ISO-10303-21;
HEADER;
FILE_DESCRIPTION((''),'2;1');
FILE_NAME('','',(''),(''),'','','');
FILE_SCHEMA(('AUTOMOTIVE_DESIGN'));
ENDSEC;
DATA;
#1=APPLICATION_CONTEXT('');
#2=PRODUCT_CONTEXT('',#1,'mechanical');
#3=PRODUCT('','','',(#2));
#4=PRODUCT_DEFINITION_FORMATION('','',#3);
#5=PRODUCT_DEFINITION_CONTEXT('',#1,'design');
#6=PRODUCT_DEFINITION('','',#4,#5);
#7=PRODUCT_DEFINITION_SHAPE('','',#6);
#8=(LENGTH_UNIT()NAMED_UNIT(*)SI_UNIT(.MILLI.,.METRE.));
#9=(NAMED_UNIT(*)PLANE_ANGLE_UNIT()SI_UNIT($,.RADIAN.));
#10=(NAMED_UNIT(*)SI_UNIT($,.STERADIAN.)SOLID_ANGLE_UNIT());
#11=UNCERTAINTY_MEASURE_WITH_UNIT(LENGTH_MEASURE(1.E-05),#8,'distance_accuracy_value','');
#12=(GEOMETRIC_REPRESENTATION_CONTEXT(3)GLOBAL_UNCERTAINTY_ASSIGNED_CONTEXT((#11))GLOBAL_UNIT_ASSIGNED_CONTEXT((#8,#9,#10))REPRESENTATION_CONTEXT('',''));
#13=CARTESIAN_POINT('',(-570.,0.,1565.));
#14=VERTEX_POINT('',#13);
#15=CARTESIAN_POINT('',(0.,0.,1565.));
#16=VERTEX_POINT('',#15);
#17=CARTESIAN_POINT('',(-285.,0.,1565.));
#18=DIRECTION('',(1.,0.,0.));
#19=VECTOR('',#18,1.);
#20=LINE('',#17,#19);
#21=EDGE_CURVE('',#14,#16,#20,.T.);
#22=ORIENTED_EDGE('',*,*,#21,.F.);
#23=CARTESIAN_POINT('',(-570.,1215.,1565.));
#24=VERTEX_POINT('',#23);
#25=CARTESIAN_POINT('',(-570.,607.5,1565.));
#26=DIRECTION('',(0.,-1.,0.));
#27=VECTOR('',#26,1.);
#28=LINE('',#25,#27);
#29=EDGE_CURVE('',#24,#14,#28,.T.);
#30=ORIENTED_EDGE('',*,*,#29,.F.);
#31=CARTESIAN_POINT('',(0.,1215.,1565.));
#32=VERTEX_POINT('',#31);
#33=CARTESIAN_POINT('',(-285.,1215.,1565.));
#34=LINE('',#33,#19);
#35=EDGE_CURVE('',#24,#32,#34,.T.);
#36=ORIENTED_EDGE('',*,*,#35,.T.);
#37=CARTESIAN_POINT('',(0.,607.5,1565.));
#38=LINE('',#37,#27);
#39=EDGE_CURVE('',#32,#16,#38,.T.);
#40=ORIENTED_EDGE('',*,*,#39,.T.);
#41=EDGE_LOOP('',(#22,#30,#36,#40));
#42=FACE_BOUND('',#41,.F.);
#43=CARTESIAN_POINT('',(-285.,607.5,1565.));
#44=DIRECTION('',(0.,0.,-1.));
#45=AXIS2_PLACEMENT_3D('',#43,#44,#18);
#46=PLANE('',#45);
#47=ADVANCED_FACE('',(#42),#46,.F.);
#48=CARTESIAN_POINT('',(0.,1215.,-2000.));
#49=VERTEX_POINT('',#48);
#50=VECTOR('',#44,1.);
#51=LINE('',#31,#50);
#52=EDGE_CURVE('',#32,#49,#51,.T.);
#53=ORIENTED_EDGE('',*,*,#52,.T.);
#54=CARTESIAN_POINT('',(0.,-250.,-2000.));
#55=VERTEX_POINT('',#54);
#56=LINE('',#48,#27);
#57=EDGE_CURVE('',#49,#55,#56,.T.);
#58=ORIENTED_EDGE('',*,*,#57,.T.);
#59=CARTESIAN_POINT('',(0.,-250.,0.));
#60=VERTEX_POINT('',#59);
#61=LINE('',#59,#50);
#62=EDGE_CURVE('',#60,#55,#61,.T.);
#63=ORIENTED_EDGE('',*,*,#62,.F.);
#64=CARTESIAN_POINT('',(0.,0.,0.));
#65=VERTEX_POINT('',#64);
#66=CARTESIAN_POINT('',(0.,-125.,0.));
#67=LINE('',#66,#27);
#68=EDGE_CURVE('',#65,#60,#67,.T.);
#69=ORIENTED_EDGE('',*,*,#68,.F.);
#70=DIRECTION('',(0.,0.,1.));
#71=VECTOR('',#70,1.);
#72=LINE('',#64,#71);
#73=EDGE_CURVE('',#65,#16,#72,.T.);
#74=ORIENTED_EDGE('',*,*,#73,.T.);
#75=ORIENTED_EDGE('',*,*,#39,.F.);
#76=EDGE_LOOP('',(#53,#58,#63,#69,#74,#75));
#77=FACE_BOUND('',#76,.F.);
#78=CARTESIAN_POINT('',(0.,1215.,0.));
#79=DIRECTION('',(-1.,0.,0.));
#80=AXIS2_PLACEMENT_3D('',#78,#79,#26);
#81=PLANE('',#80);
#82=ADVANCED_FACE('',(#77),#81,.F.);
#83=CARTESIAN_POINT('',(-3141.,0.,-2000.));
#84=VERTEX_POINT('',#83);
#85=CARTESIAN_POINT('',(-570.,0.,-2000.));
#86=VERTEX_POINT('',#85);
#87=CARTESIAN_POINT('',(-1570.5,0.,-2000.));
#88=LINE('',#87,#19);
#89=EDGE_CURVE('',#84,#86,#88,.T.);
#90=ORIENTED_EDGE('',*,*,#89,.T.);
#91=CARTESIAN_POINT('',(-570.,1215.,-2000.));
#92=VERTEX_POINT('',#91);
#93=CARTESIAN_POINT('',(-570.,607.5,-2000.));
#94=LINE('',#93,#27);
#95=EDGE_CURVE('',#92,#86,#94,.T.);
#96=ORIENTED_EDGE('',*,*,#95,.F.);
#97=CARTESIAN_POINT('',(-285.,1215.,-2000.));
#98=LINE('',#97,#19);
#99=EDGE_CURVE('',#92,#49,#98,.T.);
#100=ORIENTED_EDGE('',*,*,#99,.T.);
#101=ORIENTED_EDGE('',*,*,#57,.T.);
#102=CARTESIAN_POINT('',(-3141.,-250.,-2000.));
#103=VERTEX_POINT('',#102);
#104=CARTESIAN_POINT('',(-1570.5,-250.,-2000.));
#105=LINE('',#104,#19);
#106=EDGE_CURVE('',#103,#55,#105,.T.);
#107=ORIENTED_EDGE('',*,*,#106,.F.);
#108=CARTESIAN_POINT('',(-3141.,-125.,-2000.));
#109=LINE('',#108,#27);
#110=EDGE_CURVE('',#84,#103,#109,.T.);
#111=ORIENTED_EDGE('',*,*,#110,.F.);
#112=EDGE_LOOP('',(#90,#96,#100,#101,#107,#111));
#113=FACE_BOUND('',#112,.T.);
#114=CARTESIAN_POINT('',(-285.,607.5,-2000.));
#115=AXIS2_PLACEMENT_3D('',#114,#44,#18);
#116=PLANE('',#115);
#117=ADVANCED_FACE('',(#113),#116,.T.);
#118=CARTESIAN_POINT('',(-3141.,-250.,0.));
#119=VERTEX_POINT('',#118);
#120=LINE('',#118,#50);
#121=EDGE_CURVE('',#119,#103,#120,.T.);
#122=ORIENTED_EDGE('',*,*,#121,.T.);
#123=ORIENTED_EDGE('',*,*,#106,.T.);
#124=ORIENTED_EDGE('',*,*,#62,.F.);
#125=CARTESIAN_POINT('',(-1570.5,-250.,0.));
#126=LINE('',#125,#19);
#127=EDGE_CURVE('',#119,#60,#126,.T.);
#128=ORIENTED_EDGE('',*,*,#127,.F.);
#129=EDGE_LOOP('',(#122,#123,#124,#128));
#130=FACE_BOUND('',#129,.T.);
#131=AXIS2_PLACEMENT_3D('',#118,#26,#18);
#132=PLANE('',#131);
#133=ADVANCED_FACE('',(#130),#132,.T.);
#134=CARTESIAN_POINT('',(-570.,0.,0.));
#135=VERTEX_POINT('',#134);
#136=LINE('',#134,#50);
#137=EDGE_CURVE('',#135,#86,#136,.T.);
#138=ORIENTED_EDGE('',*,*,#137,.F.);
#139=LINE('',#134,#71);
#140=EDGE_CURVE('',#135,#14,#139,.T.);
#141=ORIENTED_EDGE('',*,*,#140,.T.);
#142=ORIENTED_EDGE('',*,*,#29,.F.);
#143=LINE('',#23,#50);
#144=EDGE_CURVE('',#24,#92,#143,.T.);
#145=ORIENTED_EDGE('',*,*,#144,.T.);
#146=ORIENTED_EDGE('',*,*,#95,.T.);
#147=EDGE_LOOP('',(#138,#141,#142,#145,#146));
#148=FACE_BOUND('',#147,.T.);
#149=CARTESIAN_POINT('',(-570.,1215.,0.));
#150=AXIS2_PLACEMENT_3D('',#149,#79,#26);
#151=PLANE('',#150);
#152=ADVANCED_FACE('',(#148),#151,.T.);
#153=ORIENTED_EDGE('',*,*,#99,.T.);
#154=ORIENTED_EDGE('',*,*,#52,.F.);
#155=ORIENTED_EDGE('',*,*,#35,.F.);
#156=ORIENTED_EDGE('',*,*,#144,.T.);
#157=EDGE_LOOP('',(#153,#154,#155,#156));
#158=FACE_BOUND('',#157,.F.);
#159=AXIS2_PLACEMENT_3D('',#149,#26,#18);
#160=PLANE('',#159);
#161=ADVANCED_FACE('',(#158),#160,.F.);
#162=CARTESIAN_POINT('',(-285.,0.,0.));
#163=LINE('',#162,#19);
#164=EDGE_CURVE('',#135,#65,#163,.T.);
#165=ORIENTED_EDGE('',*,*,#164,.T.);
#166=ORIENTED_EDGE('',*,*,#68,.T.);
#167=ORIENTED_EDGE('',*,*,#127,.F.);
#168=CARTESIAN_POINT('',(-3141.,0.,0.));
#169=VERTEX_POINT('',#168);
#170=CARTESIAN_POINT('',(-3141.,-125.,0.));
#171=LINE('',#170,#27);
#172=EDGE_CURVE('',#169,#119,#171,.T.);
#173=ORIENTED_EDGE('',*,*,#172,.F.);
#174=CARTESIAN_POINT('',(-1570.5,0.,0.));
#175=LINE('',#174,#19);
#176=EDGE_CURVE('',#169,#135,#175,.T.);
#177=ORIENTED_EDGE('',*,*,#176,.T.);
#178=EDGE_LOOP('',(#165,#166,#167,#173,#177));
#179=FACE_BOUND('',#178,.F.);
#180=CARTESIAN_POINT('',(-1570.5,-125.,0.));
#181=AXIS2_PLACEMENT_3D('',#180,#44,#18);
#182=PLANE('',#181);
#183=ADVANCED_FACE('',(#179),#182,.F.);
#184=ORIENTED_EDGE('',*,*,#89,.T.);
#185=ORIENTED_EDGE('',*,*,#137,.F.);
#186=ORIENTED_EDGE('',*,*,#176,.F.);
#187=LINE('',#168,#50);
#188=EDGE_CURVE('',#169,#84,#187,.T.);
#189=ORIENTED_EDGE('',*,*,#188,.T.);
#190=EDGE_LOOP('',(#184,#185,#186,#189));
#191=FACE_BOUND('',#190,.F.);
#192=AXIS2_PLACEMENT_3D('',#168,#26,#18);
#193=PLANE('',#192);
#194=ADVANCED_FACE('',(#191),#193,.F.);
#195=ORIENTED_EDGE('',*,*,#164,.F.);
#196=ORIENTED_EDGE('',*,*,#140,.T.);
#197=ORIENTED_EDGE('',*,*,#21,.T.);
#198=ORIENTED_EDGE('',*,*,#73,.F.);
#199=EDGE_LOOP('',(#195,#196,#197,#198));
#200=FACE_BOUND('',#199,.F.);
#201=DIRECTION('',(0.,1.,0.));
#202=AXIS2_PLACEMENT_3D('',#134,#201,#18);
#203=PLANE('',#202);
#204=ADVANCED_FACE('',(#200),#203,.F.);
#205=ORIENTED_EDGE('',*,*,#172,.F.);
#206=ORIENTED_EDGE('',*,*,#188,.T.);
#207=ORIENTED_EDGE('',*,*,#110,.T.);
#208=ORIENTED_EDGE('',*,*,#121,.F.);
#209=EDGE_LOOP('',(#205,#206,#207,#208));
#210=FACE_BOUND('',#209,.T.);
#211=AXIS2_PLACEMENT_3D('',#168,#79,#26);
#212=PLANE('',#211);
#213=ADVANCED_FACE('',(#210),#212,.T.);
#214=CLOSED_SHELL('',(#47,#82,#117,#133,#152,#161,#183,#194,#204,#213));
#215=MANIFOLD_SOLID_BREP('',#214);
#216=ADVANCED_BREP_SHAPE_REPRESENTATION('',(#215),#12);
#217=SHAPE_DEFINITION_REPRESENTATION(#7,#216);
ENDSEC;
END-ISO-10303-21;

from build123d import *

# Parameters (mm, degrees)
F4_W     = 570
F4_H     = 1215
F5_DEPTH = 1565
F1_E1_W  = 3141
F1_E1_H  = 250
F6_DEPTH = 2000
F7_DEPTH = 2000


# Not quite as in the source:
# - an extrude ends at something that could not be found from the text; its depth is read off the source's solid
# - the program builds the solid bodies; features that only make, move or delete a surface that nothing else refers to are left out


with BuildPart() as f5:
    # F4 (on face) → F5 (new body)
    with BuildSketch(Plane(origin=(0, 0, 0), x_dir=(1, 0, 0), z_dir=(0, 0, -1))):
        with Locations((-285, -607.5)):
            Rectangle(F4_W, F4_H)
    extrude(amount=-F5_DEPTH)

    # F1_E1 (on explicit) → F6 (join)
    with BuildSketch(Plane(origin=(-3141, 0, 0), x_dir=(1, 0, 0), z_dir=(0, 0, -1))):
        with Locations((1570.5, 125)):
            Rectangle(F1_E1_W, F1_E1_H)
    extrude(amount=F6_DEPTH)

    # F7 (add, through all): a face of the model
    f7_faces = [f5.faces().sort_by_distance(p)[0] for p in [
        (-285, 607.5, 0),
    ]]
    extrude(f7_faces, amount=F7_DEPTH)


solid = f5.part
